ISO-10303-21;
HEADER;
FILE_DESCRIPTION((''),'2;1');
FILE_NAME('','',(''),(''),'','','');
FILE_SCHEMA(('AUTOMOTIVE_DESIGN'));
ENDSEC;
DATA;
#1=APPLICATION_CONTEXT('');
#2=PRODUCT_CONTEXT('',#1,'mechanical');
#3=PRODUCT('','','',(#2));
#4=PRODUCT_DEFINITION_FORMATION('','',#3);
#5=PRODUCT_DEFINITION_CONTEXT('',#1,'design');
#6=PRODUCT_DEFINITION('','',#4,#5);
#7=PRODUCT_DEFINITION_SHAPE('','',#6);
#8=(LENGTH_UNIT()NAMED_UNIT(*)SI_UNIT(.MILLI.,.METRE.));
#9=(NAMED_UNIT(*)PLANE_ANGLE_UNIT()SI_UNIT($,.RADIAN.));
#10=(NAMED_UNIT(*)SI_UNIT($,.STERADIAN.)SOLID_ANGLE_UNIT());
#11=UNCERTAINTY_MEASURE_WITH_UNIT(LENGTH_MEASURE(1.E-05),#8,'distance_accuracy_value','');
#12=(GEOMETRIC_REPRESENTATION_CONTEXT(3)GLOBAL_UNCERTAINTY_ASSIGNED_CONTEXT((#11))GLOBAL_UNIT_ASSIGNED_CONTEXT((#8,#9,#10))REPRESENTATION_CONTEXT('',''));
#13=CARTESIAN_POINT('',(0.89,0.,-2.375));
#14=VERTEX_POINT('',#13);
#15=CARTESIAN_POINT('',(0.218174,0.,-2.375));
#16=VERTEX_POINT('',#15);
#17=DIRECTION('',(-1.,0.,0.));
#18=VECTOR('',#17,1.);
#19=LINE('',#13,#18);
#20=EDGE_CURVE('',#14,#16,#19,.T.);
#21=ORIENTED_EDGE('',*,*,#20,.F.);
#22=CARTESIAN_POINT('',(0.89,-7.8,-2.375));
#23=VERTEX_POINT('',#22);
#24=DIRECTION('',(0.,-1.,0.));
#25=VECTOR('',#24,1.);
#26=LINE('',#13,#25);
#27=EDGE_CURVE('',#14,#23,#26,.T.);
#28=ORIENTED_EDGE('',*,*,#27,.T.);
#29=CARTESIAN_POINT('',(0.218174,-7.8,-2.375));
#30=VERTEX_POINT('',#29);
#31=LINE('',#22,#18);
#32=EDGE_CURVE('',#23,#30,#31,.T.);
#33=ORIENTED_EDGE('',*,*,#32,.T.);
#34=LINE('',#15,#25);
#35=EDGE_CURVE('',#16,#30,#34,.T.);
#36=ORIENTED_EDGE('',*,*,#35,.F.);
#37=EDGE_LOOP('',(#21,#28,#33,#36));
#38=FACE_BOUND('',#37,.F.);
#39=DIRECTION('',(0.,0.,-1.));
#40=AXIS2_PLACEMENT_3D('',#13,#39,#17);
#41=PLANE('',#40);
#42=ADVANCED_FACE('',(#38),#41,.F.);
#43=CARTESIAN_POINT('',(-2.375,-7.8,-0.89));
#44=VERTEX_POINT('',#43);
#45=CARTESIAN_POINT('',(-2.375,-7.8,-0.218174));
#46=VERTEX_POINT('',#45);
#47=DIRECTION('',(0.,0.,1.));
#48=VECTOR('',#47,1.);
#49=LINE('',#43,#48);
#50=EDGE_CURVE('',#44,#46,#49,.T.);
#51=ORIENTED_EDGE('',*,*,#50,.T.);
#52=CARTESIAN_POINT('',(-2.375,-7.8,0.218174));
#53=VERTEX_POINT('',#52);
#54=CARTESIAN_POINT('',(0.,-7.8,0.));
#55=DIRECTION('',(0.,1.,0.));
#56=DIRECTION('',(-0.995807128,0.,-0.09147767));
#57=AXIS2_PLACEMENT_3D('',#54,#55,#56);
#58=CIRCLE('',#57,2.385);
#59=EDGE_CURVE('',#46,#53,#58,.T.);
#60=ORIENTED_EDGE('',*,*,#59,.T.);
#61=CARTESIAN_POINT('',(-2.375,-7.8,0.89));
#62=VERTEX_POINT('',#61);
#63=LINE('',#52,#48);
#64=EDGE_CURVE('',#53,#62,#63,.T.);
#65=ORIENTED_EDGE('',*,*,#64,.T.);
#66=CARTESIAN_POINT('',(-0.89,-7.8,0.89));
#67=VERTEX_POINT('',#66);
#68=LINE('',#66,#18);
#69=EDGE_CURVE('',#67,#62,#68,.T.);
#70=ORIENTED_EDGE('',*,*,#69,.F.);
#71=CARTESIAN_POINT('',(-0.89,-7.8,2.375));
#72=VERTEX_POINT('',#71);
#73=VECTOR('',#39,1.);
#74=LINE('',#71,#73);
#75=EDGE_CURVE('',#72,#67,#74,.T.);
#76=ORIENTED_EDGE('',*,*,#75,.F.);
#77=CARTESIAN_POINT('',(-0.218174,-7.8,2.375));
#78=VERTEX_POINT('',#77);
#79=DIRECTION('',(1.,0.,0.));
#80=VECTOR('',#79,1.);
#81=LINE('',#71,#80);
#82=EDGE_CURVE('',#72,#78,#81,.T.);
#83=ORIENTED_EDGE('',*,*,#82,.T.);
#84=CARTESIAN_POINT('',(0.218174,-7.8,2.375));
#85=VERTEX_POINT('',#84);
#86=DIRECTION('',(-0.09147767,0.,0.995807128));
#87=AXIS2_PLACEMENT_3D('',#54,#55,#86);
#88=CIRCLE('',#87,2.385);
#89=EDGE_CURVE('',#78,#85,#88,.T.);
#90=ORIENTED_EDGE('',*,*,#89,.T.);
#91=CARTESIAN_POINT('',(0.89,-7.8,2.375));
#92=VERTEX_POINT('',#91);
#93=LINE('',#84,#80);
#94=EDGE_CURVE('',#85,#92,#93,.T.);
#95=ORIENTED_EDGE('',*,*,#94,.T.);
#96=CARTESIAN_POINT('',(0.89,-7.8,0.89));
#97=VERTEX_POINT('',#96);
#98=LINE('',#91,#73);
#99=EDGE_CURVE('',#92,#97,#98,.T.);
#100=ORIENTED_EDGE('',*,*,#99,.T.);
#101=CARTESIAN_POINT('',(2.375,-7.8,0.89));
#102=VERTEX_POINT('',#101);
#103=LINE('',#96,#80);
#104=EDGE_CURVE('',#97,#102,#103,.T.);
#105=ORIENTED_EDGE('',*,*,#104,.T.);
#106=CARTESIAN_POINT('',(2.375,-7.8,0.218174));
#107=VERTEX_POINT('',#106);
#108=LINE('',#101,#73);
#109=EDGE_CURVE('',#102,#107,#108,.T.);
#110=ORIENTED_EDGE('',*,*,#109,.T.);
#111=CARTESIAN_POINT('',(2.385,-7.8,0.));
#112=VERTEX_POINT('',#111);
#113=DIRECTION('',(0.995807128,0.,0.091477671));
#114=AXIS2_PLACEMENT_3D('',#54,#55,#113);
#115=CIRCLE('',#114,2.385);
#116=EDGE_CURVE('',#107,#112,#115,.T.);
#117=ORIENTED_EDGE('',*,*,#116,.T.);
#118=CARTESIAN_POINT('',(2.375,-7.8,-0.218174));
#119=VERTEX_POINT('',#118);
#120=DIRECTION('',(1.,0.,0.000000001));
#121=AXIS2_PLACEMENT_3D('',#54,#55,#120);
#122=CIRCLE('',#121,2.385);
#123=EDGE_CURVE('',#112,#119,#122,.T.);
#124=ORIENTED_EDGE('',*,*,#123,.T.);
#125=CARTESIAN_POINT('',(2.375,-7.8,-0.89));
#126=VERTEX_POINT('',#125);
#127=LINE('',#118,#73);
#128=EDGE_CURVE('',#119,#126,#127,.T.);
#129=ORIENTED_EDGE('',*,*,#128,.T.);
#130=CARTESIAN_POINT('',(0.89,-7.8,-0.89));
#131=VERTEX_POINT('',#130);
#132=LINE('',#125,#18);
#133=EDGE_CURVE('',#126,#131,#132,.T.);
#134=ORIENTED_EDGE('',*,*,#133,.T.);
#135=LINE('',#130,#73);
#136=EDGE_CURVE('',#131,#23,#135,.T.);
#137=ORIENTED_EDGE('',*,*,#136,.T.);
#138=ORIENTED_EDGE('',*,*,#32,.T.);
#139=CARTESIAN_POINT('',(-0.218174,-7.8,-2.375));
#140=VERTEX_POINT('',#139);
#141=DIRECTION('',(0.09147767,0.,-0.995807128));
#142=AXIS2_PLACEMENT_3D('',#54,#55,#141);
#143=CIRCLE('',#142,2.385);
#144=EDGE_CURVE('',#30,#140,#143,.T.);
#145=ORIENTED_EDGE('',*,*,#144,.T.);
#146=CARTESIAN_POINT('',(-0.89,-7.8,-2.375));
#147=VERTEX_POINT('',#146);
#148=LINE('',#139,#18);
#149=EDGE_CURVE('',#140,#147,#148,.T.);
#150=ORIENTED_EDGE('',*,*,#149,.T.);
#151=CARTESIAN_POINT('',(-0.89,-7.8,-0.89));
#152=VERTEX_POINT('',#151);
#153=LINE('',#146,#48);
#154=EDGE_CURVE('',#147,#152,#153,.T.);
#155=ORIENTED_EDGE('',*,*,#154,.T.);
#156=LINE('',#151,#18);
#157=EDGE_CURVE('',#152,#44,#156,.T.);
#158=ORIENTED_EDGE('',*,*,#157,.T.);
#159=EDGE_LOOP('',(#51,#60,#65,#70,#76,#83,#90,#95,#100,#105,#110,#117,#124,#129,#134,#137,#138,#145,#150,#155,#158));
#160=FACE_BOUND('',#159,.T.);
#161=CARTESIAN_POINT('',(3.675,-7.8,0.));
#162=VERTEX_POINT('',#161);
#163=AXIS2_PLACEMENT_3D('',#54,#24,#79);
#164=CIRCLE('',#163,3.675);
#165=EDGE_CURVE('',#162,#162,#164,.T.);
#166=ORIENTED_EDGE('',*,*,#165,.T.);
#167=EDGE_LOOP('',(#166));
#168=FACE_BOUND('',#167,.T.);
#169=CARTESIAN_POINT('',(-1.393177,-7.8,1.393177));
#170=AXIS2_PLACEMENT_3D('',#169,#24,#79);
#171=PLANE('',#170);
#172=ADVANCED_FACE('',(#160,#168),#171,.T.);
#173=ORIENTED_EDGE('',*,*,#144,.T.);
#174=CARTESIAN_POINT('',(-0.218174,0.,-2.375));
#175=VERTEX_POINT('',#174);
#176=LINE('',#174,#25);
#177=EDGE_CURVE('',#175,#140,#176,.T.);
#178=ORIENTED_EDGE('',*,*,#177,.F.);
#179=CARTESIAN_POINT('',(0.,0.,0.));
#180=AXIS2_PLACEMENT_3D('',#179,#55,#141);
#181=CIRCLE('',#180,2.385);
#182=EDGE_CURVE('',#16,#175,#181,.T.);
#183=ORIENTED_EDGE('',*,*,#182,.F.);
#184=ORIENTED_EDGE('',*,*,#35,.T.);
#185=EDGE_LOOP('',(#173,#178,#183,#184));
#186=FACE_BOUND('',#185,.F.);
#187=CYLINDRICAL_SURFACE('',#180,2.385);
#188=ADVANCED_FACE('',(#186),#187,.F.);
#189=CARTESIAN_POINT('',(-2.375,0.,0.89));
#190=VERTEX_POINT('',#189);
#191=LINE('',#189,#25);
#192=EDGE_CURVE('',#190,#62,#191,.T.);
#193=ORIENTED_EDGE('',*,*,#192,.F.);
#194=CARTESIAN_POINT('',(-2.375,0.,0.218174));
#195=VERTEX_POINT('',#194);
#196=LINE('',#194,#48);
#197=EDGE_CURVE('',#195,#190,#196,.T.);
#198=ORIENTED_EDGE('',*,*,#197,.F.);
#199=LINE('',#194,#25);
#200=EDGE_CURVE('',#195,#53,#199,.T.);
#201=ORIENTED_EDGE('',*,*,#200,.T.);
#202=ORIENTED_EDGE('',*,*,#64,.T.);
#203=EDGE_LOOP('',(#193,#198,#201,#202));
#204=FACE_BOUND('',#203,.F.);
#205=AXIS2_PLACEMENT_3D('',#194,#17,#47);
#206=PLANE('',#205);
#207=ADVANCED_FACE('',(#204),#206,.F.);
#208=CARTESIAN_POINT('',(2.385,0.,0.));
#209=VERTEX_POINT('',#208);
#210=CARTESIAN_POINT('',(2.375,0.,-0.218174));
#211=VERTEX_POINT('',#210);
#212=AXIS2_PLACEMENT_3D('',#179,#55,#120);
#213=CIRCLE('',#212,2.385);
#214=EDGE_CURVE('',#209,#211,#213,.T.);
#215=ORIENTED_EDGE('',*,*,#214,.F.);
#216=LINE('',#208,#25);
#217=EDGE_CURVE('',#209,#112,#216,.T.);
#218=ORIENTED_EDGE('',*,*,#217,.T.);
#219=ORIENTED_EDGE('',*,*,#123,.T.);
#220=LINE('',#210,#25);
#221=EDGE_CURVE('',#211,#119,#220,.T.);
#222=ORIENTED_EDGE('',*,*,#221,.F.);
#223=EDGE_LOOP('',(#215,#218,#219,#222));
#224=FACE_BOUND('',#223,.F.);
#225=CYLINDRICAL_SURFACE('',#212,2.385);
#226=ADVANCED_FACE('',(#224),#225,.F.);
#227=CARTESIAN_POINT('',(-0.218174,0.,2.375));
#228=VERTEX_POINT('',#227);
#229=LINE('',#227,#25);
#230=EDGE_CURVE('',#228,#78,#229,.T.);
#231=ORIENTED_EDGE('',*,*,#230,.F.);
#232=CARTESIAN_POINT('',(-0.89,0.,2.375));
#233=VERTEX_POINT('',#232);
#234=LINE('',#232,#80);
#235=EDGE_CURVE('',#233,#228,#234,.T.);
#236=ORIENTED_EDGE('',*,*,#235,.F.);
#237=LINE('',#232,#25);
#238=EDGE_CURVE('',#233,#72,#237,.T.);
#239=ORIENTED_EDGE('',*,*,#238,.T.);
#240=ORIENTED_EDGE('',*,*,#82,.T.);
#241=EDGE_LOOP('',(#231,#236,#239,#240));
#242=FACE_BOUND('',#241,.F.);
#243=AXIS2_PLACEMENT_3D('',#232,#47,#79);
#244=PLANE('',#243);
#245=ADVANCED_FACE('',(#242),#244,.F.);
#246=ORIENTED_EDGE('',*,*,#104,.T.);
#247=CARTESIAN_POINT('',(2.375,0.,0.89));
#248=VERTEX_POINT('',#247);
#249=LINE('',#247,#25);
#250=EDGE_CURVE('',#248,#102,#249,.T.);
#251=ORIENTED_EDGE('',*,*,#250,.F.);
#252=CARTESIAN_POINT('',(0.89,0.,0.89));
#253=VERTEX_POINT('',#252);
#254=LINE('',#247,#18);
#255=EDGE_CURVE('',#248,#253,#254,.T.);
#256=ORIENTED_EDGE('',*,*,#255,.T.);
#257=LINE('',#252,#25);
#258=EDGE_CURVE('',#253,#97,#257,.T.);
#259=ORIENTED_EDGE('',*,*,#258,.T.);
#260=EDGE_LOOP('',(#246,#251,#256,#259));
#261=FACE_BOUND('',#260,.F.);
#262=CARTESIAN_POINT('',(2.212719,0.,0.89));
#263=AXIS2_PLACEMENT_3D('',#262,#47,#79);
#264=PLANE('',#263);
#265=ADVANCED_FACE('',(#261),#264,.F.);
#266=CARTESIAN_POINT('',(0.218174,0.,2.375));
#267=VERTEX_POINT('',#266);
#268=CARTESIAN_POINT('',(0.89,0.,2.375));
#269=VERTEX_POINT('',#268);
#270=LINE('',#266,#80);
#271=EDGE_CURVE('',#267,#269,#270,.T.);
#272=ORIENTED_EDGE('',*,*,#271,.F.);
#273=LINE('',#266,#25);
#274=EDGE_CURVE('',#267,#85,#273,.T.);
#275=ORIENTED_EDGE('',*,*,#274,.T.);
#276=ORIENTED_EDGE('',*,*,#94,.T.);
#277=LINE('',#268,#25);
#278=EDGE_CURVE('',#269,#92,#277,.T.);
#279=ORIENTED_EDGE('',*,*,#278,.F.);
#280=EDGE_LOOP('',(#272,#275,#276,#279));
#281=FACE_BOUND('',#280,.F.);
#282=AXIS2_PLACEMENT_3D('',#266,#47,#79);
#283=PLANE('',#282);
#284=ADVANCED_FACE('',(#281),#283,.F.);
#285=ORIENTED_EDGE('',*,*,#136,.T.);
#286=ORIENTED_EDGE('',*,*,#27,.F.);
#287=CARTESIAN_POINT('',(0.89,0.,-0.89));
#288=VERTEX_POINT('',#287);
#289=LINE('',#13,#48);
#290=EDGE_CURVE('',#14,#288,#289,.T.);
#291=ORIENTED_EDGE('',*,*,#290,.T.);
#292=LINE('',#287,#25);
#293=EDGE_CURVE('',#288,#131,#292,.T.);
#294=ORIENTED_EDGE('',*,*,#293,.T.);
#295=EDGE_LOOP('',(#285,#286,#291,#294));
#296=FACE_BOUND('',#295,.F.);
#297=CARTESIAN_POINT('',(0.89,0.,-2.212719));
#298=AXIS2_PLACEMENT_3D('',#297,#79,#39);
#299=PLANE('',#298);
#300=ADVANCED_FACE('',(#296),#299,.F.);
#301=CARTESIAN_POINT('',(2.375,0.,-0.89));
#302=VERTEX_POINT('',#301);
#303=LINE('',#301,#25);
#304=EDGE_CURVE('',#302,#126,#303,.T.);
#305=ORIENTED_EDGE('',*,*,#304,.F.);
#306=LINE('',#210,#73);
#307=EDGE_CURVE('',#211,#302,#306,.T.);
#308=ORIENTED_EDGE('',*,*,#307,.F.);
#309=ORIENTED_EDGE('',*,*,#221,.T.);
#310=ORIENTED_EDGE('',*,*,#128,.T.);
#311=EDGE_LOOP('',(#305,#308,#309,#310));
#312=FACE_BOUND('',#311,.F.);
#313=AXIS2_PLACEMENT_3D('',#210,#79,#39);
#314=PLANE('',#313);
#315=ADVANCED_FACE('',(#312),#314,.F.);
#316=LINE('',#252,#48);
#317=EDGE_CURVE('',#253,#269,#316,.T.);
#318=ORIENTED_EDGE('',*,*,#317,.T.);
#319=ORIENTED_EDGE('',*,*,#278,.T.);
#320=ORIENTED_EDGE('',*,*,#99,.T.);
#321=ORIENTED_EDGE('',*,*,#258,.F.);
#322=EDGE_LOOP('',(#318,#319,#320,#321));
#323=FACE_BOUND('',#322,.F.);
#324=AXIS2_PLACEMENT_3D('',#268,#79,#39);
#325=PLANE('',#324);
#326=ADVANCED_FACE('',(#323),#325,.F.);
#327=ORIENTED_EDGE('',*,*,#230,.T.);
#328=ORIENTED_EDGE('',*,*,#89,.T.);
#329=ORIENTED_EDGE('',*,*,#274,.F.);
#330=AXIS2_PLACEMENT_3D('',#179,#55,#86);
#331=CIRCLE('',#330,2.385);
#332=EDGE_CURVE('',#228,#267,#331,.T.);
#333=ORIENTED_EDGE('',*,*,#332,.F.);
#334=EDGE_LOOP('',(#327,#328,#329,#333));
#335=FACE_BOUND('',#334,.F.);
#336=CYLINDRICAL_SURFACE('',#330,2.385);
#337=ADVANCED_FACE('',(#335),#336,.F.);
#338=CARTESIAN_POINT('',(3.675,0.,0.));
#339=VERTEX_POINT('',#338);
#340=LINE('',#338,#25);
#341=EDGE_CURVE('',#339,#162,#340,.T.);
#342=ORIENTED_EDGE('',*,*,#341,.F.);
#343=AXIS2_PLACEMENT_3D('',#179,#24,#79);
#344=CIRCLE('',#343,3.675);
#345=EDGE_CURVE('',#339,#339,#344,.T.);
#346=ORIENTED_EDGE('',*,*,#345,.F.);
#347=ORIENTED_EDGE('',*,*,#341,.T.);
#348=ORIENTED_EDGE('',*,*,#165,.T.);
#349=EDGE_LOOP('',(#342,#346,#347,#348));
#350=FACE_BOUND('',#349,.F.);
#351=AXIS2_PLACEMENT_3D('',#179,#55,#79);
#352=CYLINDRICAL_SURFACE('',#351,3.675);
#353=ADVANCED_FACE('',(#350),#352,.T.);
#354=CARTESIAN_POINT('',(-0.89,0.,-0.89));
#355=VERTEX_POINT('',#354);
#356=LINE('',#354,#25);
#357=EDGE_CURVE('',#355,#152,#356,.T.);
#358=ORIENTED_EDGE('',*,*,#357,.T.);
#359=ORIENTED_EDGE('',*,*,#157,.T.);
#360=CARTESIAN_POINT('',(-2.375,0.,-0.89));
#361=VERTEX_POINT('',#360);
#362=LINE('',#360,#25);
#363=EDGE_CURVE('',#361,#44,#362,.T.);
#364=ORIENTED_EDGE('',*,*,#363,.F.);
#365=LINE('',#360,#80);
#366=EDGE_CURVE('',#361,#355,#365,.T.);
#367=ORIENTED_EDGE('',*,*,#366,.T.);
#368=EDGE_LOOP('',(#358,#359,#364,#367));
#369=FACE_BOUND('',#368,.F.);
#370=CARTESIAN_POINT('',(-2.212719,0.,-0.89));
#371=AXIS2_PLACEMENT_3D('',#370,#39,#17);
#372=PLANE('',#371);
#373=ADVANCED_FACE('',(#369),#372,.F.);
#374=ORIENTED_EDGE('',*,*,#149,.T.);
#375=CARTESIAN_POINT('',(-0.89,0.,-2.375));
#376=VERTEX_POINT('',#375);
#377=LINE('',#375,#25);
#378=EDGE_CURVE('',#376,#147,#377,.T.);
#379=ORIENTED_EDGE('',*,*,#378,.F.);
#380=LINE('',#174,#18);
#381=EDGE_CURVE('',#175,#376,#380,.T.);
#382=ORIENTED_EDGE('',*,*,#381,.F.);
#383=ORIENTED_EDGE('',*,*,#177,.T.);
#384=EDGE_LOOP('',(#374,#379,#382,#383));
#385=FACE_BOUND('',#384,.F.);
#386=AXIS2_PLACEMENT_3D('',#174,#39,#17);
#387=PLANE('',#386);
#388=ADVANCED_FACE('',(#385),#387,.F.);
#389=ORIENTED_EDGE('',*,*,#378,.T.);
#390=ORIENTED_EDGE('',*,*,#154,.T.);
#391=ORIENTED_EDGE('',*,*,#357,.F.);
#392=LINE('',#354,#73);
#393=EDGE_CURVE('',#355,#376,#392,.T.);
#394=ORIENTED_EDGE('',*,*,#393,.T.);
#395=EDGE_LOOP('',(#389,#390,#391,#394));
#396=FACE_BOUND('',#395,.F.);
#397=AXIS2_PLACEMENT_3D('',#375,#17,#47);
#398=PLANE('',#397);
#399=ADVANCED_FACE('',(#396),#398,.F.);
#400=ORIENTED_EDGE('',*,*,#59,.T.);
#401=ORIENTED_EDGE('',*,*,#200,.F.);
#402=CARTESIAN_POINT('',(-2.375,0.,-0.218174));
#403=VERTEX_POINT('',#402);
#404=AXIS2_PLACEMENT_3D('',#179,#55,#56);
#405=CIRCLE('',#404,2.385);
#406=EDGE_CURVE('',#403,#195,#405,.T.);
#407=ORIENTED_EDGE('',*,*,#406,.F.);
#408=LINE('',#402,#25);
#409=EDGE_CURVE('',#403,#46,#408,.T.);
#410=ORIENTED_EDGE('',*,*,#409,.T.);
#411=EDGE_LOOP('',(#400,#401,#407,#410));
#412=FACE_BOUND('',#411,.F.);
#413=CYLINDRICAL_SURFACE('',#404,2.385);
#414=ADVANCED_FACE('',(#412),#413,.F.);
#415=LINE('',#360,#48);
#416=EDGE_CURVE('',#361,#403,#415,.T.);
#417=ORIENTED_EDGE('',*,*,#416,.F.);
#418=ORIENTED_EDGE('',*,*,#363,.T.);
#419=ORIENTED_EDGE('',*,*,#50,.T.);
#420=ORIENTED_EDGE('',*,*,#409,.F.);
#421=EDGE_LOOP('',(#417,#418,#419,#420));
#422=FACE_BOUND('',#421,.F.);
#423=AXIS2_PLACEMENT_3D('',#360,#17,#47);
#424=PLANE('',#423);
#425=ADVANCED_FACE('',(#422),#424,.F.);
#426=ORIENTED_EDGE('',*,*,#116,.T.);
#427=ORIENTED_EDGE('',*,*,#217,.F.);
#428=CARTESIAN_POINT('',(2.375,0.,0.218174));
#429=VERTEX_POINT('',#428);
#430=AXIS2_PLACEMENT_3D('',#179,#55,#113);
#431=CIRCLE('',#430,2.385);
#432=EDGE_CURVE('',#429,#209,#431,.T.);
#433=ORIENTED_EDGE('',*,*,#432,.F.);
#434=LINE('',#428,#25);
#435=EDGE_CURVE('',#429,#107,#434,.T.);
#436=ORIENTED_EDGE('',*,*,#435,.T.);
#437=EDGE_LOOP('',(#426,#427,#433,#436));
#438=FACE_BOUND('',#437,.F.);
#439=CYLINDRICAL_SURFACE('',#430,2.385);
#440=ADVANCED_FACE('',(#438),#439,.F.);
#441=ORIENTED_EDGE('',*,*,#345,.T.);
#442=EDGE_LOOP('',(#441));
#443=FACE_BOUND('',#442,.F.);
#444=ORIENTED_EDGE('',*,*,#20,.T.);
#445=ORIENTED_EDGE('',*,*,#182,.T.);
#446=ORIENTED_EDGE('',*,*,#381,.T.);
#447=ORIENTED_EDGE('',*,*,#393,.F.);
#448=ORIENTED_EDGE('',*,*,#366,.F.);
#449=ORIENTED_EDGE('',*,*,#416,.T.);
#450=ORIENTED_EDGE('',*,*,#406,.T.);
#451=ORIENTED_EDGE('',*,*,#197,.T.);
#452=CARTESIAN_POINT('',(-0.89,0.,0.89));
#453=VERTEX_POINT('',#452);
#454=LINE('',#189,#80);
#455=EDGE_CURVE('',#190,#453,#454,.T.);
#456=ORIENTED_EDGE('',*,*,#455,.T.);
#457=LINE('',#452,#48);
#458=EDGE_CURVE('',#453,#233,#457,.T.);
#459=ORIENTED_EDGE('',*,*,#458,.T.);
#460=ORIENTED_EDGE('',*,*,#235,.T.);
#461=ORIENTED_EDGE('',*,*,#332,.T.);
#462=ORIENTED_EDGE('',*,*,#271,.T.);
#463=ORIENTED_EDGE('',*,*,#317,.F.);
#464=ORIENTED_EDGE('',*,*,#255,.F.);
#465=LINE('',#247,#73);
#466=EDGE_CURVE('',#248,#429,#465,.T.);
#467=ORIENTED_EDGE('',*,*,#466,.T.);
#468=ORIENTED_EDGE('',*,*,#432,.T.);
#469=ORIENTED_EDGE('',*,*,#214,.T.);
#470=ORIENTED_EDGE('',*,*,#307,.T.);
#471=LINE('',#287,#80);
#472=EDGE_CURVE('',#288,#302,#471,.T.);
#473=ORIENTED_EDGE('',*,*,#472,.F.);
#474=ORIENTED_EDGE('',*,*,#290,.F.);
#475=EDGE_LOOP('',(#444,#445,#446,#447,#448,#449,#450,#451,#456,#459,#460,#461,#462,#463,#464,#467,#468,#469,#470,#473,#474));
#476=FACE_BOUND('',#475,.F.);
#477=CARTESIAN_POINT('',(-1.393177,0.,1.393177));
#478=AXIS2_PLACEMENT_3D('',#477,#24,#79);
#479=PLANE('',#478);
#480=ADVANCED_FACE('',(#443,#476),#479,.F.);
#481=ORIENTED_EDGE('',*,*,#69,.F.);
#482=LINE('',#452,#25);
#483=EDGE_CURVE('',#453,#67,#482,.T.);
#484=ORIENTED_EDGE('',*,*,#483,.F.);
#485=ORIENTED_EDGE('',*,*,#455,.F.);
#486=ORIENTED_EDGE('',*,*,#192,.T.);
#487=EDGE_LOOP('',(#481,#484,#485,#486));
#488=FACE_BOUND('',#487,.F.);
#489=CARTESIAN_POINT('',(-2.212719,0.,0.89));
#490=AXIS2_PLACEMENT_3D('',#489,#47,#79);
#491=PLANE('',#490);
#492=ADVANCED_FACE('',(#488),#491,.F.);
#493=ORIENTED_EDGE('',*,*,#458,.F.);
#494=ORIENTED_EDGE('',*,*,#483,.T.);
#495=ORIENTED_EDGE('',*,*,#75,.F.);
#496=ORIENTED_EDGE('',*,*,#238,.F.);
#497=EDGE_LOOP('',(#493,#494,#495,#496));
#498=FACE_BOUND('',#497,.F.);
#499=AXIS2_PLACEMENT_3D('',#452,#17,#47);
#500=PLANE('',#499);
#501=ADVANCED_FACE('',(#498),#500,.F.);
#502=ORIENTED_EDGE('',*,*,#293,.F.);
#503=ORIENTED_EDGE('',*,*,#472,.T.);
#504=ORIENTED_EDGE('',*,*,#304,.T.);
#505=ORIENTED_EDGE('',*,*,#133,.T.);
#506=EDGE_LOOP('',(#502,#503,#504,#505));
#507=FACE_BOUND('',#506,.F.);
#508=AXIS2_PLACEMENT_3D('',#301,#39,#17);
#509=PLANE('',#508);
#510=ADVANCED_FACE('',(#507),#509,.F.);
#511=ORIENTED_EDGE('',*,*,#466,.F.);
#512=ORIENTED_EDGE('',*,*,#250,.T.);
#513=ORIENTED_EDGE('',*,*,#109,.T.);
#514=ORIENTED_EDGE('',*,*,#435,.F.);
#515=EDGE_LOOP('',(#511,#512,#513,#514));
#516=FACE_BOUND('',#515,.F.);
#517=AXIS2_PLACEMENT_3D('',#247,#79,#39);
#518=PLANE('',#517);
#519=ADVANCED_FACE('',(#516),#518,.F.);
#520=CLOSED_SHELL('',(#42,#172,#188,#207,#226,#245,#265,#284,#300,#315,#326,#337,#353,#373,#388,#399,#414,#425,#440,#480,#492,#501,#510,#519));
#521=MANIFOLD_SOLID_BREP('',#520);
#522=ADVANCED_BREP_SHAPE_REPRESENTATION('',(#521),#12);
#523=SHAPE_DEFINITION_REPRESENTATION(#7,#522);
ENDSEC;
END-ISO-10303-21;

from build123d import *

# Parameters (mm, degrees)
F0_R     = 3.675
F1_DEPTH = 7.8
F2_DEPTH = 7.8


# Not quite as in the source:
# - a feature names something its author has since deleted; it is built from what else it names


with BuildPart() as f1:
    # F0 (on Front) → F1 (new body)
    with BuildSketch(Plane.XZ):
        Circle(F0_R)
        with BuildLine():
            Line((-2.375, 0.2181742423), (-2.375, 0.89))
            Line((-2.375, 0.89), (-2.2127189157, 0.89))
            ThreePointArc((-2.2127189157, 0.89), (-1.6864496731, 1.6864496731), (-0.89, 2.2127189157))
            Line((-0.89, 2.2127189157), (-0.89, 2.375))
            Line((-0.89, 2.375), (-0.2181742423, 2.375))
            ThreePointArc((-0.2181742423, 2.375), (0, 2.385), (0.2181742423, 2.375))
            Line((0.2181742423, 2.375), (0.89, 2.375))
            Line((0.89, 2.375), (0.89, 2.2127189157))
            ThreePointArc((0.89, 2.2127189157), (1.6864496731, 1.6864496731), (2.2127189157, 0.89))
            Line((2.2127189157, 0.89), (2.375, 0.89))
            Line((2.375, 0.89), (2.375, 0.2181742423))
            ThreePointArc((2.375, 0.2181742423), (2.3824986884, 0.1092016483), (2.385, 0))
            ThreePointArc((2.385, 0), (2.3824986884, -0.1092016483), (2.375, -0.2181742423))
            Line((2.375, -0.2181742423), (2.375, -0.89))
            Line((2.375, -0.89), (2.2127189157, -0.89))
            ThreePointArc((2.2127189157, -0.89), (1.6864496731, -1.6864496731), (0.89, -2.2127189157))
            Line((0.89, -2.2127189157), (0.89, -2.375))
            Line((0.89, -2.375), (0.2181742423, -2.375))
            ThreePointArc((0.2181742423, -2.375), (0, -2.385), (-0.2181742423, -2.375))
            Line((-0.2181742423, -2.375), (-0.89, -2.375))
            Line((-0.89, -2.375), (-0.89, -2.2127189157))
            ThreePointArc((-0.89, -2.2127189157), (-1.6864496731, -1.6864496731), (-2.2127189157, -0.89))
            Line((-2.2127189157, -0.89), (-2.375, -0.89))
            Line((-2.375, -0.89), (-2.375, -0.2181742423))
            ThreePointArc((-2.375, -0.2181742423), (-2.385, 0), (-2.375, 0.2181742423))
        make_face(mode=Mode.SUBTRACT)
    extrude(amount=F1_DEPTH)

    # F0 (on Front) → F2 (join)
    with BuildSketch(Plane.XZ):
        with BuildLine():
            ThreePointArc((-0.89, 2.2127189157), (-1.6864496731, 1.6864496731), (-2.2127189157, 0.89))
            Line((-2.2127189157, 0.89), (-0.89, 0.89))
            Line((-0.89, 0.89), (-0.89, 2.2127189157))
        make_face()
        with BuildLine():
            Line((0.89, 2.2127189157), (0.89, 0.89))
            Line((0.89, 0.89), (2.2127189157, 0.89))
            ThreePointArc((2.2127189157, 0.89), (1.6864496731, 1.6864496731), (0.89, 2.2127189157))
        make_face()
        with BuildLine():
            Line((-0.89, -0.89), (-2.2127189157, -0.89))
            ThreePointArc((-2.2127189157, -0.89), (-1.6864496731, -1.6864496731), (-0.89, -2.2127189157))
            Line((-0.89, -2.2127189157), (-0.89, -0.89))
        make_face()
        with BuildLine():
            Line((2.2127189157, -0.89), (0.89, -0.89))
            Line((0.89, -0.89), (0.89, -2.2127189157))
            ThreePointArc((0.89, -2.2127189157), (1.6864496731, -1.6864496731), (2.2127189157, -0.89))
        make_face()
    extrude(amount=F2_DEPTH)


solid = f1.part
